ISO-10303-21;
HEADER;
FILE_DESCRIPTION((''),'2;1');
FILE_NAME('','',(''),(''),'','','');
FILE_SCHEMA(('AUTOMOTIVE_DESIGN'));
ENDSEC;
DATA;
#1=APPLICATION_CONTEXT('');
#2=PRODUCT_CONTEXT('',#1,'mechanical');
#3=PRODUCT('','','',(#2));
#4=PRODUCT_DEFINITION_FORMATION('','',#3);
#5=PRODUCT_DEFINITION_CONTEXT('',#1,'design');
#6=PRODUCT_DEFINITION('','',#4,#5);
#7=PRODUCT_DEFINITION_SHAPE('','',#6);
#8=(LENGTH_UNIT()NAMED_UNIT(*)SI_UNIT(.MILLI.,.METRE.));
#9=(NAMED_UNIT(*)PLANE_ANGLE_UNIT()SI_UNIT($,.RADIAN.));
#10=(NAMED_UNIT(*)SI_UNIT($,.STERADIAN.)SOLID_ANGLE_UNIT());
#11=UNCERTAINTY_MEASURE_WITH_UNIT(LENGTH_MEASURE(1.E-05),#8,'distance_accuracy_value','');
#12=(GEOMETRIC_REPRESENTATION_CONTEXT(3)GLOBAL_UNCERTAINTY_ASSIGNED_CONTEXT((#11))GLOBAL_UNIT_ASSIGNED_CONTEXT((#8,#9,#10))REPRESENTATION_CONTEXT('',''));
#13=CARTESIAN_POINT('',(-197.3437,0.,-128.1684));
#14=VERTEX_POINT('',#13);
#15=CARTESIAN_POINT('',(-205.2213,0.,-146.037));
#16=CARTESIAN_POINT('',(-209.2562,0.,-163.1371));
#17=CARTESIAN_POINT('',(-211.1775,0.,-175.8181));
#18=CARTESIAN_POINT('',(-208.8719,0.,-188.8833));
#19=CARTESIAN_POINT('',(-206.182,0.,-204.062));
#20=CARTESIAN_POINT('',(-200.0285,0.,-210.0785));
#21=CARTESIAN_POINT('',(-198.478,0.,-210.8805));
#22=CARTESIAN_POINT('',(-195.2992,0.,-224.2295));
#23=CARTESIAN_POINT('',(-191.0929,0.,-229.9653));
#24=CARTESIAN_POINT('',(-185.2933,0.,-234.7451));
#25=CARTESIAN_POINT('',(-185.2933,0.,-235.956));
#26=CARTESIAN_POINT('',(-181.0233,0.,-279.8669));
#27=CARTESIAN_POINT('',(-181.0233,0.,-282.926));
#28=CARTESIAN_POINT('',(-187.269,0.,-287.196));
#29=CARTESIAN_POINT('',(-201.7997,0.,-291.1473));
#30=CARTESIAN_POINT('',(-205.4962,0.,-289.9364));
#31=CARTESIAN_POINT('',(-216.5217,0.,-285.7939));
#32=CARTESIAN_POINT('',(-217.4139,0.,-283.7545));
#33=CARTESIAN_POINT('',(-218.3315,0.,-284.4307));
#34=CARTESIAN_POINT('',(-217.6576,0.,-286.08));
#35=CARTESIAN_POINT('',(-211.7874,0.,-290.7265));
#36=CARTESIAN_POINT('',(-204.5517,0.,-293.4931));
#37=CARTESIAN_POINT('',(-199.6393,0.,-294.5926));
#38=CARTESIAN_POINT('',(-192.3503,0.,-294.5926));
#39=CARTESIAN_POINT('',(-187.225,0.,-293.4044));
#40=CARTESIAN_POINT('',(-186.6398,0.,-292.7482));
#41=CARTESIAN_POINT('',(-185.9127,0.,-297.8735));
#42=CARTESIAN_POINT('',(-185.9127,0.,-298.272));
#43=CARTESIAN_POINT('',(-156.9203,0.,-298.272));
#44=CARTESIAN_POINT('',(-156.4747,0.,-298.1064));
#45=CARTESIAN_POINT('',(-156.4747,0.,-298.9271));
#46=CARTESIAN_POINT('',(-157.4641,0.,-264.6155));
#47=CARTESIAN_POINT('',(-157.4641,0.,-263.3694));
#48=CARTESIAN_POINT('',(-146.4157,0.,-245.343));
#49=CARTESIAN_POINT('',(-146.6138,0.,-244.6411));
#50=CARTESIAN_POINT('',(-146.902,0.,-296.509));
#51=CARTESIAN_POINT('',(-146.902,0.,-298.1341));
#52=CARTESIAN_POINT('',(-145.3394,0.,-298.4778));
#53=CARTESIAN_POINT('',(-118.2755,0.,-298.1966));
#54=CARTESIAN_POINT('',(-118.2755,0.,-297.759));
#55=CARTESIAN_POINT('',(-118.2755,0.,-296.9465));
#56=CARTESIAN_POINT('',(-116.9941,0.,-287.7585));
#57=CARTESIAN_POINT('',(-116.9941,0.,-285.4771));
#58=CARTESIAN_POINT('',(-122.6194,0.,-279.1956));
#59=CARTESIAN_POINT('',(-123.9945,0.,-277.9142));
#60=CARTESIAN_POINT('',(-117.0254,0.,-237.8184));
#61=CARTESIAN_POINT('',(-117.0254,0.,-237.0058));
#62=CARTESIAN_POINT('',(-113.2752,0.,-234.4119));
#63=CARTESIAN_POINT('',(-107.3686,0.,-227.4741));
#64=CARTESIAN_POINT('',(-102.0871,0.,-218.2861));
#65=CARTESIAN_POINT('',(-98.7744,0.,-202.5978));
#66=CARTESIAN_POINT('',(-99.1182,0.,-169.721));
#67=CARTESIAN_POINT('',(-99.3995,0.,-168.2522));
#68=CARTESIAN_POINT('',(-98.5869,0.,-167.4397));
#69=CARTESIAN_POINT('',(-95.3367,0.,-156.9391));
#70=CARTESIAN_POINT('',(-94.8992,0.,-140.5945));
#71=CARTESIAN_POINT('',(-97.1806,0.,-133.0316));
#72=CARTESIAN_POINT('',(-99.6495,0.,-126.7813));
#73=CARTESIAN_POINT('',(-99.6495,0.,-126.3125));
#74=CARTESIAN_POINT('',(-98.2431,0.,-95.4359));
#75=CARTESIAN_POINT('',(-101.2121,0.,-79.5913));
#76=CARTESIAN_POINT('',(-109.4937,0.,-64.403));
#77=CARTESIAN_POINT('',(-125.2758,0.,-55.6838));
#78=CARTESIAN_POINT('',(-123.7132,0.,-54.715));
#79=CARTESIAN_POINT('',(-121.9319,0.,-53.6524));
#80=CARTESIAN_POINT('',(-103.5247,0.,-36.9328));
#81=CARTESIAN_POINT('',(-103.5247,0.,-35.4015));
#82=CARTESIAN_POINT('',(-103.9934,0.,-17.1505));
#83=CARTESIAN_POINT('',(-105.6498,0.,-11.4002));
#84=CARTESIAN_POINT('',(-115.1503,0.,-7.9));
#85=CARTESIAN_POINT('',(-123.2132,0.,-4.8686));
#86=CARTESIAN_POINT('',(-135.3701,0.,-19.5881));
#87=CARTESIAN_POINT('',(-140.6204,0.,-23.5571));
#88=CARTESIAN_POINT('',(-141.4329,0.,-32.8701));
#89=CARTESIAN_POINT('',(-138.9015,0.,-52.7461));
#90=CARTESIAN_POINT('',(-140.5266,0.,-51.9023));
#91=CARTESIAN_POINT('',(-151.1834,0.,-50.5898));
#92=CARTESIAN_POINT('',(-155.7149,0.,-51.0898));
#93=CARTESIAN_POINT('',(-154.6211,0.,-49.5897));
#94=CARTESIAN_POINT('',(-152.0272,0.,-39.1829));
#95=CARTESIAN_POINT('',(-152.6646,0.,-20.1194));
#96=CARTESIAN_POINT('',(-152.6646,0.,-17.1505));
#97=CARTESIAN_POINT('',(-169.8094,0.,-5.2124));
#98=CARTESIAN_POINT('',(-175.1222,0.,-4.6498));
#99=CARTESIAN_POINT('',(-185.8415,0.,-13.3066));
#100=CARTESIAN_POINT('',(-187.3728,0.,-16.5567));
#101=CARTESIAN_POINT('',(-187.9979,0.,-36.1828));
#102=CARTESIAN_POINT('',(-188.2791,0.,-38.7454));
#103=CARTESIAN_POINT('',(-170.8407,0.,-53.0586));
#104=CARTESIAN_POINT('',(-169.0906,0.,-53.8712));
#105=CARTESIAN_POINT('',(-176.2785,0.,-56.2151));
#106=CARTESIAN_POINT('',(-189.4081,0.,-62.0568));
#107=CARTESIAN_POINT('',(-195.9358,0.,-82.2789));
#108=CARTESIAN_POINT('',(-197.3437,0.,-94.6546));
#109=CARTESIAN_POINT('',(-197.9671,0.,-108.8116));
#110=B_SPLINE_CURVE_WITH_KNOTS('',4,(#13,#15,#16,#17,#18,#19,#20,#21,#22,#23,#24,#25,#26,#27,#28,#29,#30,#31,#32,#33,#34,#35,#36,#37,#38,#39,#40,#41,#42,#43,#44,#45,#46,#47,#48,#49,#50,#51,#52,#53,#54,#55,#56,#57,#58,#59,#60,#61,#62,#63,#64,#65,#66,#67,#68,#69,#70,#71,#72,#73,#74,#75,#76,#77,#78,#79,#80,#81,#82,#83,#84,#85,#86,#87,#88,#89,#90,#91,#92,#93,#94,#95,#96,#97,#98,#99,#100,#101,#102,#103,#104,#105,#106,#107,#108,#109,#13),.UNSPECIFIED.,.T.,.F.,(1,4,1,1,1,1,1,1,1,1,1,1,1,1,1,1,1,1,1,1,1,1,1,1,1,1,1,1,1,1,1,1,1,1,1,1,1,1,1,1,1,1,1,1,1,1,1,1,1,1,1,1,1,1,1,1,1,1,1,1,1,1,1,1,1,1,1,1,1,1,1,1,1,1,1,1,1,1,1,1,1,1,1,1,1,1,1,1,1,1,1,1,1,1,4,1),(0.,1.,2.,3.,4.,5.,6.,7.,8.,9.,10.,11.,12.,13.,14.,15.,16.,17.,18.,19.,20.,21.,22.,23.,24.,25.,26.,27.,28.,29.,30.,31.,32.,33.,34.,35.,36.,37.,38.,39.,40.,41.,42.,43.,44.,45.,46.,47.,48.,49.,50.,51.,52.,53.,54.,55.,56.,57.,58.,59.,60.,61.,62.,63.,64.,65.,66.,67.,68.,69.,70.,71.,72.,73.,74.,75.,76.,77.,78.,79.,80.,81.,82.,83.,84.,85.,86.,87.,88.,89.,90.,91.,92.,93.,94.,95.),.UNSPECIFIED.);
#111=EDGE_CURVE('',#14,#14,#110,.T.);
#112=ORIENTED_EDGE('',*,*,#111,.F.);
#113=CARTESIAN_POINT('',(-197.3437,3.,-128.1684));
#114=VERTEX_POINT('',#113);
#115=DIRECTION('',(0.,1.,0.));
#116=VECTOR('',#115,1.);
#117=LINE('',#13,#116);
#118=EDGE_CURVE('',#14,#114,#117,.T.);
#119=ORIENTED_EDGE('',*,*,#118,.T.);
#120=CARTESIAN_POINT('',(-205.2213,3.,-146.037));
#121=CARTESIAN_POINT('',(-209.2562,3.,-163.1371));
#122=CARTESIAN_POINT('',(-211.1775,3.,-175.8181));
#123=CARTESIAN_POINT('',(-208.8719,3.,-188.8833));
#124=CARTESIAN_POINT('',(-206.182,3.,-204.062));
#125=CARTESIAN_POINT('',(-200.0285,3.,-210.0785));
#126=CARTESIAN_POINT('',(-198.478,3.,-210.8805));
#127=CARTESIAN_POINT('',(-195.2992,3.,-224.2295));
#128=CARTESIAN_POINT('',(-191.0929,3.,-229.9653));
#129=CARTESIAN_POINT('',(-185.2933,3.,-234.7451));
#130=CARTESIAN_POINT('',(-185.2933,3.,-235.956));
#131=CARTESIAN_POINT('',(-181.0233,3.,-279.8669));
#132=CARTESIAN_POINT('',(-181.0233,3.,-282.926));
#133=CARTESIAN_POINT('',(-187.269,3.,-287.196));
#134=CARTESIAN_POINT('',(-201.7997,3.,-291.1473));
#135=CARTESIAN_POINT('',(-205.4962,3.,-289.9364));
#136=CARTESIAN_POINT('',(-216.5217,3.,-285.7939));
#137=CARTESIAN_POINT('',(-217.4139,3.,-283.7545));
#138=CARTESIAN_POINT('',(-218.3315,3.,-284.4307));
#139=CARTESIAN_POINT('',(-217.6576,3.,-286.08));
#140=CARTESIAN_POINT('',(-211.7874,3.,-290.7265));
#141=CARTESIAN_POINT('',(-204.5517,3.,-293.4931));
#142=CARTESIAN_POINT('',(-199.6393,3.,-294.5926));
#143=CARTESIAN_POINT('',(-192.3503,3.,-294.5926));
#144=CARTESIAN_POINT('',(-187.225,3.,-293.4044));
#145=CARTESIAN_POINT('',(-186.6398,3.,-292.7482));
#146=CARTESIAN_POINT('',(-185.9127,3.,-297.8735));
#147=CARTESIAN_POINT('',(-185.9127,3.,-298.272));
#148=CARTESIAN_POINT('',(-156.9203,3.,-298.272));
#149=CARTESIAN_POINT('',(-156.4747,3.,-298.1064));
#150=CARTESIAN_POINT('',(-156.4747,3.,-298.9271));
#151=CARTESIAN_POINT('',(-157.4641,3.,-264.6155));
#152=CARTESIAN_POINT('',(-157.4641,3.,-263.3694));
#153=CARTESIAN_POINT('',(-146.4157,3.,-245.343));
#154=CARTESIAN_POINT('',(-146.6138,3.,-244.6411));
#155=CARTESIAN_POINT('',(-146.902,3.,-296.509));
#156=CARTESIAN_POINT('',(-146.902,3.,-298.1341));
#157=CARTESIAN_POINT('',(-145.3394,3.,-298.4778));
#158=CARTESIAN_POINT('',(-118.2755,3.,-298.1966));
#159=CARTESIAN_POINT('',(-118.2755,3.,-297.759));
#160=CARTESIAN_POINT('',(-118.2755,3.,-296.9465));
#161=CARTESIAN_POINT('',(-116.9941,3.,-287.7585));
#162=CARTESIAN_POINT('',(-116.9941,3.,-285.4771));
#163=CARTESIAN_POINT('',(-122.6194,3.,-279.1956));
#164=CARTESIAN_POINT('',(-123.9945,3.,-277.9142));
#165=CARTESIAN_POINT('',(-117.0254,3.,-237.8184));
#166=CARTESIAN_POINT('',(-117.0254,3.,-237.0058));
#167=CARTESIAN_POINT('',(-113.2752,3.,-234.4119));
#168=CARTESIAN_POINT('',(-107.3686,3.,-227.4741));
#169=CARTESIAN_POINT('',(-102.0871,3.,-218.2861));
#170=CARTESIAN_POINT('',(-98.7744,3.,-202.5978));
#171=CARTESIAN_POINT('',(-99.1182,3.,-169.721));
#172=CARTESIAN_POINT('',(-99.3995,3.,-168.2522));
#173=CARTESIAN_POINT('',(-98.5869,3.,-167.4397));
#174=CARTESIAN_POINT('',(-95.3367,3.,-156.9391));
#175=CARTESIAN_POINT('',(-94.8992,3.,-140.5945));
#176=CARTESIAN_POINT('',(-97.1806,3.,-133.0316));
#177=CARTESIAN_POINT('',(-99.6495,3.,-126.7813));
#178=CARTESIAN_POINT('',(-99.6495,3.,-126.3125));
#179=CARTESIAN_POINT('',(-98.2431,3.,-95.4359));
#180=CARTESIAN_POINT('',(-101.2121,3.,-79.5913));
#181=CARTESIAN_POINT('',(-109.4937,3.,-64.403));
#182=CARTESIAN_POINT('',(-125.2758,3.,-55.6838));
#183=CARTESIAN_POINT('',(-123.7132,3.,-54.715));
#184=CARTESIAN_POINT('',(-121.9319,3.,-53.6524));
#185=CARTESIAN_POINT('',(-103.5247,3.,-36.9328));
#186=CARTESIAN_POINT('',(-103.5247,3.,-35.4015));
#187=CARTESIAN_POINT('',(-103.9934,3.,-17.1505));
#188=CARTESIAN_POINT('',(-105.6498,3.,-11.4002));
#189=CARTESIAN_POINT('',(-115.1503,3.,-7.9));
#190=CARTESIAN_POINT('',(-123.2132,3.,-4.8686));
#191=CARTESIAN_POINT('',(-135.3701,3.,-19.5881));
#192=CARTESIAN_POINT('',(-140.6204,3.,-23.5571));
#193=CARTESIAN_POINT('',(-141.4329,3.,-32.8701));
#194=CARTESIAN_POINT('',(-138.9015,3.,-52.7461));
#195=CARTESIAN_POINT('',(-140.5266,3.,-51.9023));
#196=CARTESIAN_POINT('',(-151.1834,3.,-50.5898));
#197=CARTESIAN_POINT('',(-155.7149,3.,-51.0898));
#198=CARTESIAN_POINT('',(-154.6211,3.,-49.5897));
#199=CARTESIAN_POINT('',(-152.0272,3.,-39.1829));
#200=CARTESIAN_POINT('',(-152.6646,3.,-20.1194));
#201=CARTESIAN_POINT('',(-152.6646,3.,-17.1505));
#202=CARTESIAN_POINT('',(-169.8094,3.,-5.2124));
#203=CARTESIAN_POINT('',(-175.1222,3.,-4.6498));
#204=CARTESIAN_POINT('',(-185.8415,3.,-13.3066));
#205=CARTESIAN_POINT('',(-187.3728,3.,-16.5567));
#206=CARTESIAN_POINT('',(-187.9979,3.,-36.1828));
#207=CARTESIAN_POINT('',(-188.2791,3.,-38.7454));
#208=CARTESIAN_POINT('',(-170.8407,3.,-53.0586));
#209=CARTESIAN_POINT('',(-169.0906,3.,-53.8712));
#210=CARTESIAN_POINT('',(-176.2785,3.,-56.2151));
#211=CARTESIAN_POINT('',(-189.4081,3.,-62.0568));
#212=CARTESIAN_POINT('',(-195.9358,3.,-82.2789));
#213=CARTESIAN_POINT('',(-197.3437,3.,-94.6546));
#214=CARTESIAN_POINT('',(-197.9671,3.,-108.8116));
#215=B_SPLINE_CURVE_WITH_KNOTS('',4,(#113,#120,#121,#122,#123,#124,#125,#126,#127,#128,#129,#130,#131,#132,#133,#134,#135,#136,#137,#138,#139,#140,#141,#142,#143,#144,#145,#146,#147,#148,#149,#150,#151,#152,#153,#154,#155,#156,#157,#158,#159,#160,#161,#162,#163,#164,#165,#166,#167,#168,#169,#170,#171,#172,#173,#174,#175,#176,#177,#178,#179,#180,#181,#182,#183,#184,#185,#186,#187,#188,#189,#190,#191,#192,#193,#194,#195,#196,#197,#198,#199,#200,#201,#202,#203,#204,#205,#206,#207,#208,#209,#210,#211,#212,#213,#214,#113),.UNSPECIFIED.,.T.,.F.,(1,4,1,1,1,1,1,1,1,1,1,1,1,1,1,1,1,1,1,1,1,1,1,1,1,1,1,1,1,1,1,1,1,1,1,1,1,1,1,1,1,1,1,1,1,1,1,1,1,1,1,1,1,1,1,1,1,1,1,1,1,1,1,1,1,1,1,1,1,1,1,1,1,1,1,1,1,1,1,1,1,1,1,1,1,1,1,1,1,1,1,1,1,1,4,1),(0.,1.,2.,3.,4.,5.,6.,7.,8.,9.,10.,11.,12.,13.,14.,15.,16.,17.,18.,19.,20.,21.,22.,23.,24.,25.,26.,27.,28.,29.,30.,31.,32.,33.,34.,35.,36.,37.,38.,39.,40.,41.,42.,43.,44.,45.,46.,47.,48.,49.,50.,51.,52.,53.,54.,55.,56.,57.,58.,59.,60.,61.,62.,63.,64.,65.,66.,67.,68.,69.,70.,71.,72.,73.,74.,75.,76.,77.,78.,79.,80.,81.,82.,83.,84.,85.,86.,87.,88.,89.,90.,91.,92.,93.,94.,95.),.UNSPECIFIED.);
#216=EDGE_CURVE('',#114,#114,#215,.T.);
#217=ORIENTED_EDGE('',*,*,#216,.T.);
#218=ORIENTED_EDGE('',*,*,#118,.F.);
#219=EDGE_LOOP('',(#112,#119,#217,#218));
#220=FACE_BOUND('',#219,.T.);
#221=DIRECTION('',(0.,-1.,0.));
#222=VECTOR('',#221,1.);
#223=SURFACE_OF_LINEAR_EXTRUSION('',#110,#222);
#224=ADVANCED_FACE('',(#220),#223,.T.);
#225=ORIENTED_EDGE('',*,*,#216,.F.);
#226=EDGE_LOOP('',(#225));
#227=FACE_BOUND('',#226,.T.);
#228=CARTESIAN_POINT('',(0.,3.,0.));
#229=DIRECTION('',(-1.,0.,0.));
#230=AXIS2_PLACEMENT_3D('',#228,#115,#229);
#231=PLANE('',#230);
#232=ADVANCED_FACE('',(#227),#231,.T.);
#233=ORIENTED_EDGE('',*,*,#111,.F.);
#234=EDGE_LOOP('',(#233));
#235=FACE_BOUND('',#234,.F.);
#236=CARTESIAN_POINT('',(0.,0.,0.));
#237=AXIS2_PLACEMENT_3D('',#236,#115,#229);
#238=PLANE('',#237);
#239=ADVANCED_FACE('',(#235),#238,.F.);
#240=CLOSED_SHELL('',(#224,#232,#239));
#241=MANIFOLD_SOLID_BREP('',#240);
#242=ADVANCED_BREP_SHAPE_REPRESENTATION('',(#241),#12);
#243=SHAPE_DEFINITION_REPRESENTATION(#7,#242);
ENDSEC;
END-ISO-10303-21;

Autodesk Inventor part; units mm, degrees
ref_plane "YZ Plane" through (0, 0, 0) normal (1, 0, 0) x (0, 1, 0)
ref_plane "XZ Plane" through (0, 0, 0) normal (0, 1, 0) x (-1, 0, 0)
ref_plane "XY Plane" through (0, 0, 0) normal (0, 0, 1) x (1, 0, 0)
sketch "Sketch1" plane through (0, 0, 0) normal (0, 1, 0) x (-1, 0, 0)
  line L0 (0, 0) -> (305.3292, 0) construction
  line L1 (305.3292, 0) -> (305.3292, -305.3292) construction
  line L2 (305.3292, -305.3292) -> (0, -305.3292) construction
  line L3 (0, -305.3292) -> (0, 0) construction
  line L4 (197.3437, -128.1684) -> (205.2213, -146.037) construction
  line L5 (205.2213, -146.037) -> (209.2562, -163.1371) construction
  line L6 (209.2562, -163.1371) -> (211.1775, -175.8181) construction
  line L7 (211.1775, -175.8181) -> (208.8719, -188.8833) construction
  line L8 (208.8719, -188.8833) -> (206.182, -204.062) construction
  line L9 (206.182, -204.062) -> (200.0285, -210.0785) construction
  line L10 (200.0285, -210.0785) -> (198.478, -210.8805) construction
  line L11 (198.478, -210.8805) -> (195.2992, -224.2295) construction
  line L12 (195.2992, -224.2295) -> (191.0929, -229.9653) construction
  line L13 (191.0929, -229.9653) -> (185.2933, -234.7451) construction
  line L14 (185.2933, -234.7451) -> (185.2933, -235.956) construction
  line L15 (185.2933, -235.956) -> (181.0233, -279.8669) construction
  line L16 (181.0233, -279.8669) -> (181.0233, -282.926) construction
  line L17 (181.0233, -282.926) -> (187.269, -287.196) construction
  line L18 (187.269, -287.196) -> (201.7997, -291.1473) construction
  line L19 (201.7997, -291.1473) -> (205.4962, -289.9364) construction
  line L20 (205.4962, -289.9364) -> (216.5217, -285.7939) construction
  line L21 (216.5217, -285.7939) -> (217.4139, -283.7545) construction
  line L22 (217.4139, -283.7545) -> (218.3315, -284.4307) construction
  line L23 (218.3315, -284.4307) -> (217.6576, -286.08) construction
  line L24 (217.6576, -286.08) -> (211.7874, -290.7265) construction
  line L25 (211.7874, -290.7265) -> (204.5517, -293.4931) construction
  line L26 (204.5517, -293.4931) -> (199.6393, -294.5926) construction
  line L27 (199.6393, -294.5926) -> (192.3503, -294.5926) construction
  line L28 (192.3503, -294.5926) -> (187.225, -293.4044) construction
  line L29 (187.225, -293.4044) -> (186.6398, -292.7482) construction
  line L30 (186.6398, -292.7482) -> (185.9127, -297.8735) construction
  line L31 (185.9127, -297.8735) -> (185.9127, -298.272) construction
  line L32 (185.9127, -298.272) -> (156.9203, -298.272) construction
  line L33 (156.9203, -298.272) -> (156.4747, -298.1064) construction
  line L34 (156.4747, -298.1064) -> (156.4747, -298.9271) construction
  line L35 (156.4747, -298.9271) -> (157.4641, -264.6155) construction
  line L36 (157.4641, -264.6155) -> (157.4641, -263.3694) construction
  line L37 (157.4641, -263.3694) -> (146.4157, -245.343) construction
  line L38 (146.4157, -245.343) -> (146.6138, -244.6411) construction
  line L39 (146.6138, -244.6411) -> (146.902, -296.509) construction
  line L40 (146.902, -296.509) -> (146.902, -298.1341) construction
  line L41 (146.902, -298.1341) -> (145.3394, -298.4778) construction
  line L42 (145.3394, -298.4778) -> (118.2755, -298.1966) construction
  line L43 (118.2755, -298.1966) -> (118.2755, -297.759) construction
  line L44 (118.2755, -297.759) -> (118.2755, -296.9465) construction
  line L45 (118.2755, -296.9465) -> (116.9941, -287.7585) construction
  line L46 (116.9941, -287.7585) -> (116.9941, -285.4771) construction
  line L47 (116.9941, -285.4771) -> (122.6194, -279.1956) construction
  line L48 (122.6194, -279.1956) -> (123.9945, -277.9142) construction
  line L49 (123.9945, -277.9142) -> (117.0254, -237.8184) construction
  line L50 (117.0254, -237.8184) -> (117.0254, -237.0058) construction
  line L51 (117.0254, -237.0058) -> (113.2752, -234.4119) construction
  line L52 (113.2752, -234.4119) -> (107.3686, -227.4741) construction
  line L53 (107.3686, -227.4741) -> (102.0871, -218.2861) construction
  line L54 (102.0871, -218.2861) -> (98.7744, -202.5978) construction
  line L55 (98.7744, -202.5978) -> (99.1182, -169.721) construction
  line L56 (99.1182, -169.721) -> (99.3995, -168.2522) construction
  line L57 (99.3995, -168.2522) -> (98.5869, -167.4397) construction
  line L58 (98.5869, -167.4397) -> (95.3367, -156.9391) construction
  line L59 (95.3367, -156.9391) -> (94.8992, -140.5945) construction
  line L60 (94.8992, -140.5945) -> (97.1806, -133.0316) construction
  line L61 (97.1806, -133.0316) -> (99.6495, -126.7813) construction
  line L62 (99.6495, -126.7813) -> (99.6495, -126.3125) construction
  line L63 (99.6495, -126.3125) -> (98.2431, -95.4359) construction
  line L64 (98.2431, -95.4359) -> (101.2121, -79.5913) construction
  line L65 (101.2121, -79.5913) -> (109.4937, -64.403) construction
  line L66 (109.4937, -64.403) -> (125.2758, -55.6838) construction
  line L67 (125.2758, -55.6838) -> (123.7132, -54.715) construction
  line L68 (123.7132, -54.715) -> (121.9319, -53.6524) construction
  line L69 (121.9319, -53.6524) -> (103.5247, -36.9328) construction
  line L70 (103.5247, -36.9328) -> (103.5247, -35.4015) construction
  line L71 (103.5247, -35.4015) -> (103.9934, -17.1505) construction
  line L72 (103.9934, -17.1505) -> (105.6498, -11.4002) construction
  line L73 (105.6498, -11.4002) -> (115.1503, -7.9) construction
  line L74 (115.1503, -7.9) -> (123.2132, -4.8686) construction
  line L75 (123.2132, -4.8686) -> (135.3701, -19.5881) construction
  line L76 (135.3701, -19.5881) -> (140.6204, -23.5571) construction
  line L77 (140.6204, -23.5571) -> (141.4329, -32.8701) construction
  line L78 (141.4329, -32.8701) -> (138.9015, -52.7461) construction
  line L79 (138.9015, -52.7461) -> (140.5266, -51.9023) construction
  line L80 (140.5266, -51.9023) -> (151.1834, -50.5898) construction
  line L81 (151.1834, -50.5898) -> (155.7149, -51.0898) construction
  line L82 (155.7149, -51.0898) -> (154.6211, -49.5897) construction
  line L83 (154.6211, -49.5897) -> (152.0272, -39.1829) construction
  line L84 (152.0272, -39.1829) -> (152.6646, -20.1194) construction
  line L85 (152.6646, -20.1194) -> (152.6646, -17.1505) construction
  line L86 (152.6646, -17.1505) -> (169.8094, -5.2124) construction
  line L87 (169.8094, -5.2124) -> (175.1222, -4.6498) construction
  line L88 (175.1222, -4.6498) -> (185.8415, -13.3066) construction
  line L89 (185.8415, -13.3066) -> (187.3728, -16.5567) construction
  line L90 (187.3728, -16.5567) -> (187.9979, -36.1828) construction
  line L91 (187.9979, -36.1828) -> (188.2791, -38.7454) construction
  line L92 (188.2791, -38.7454) -> (170.8407, -53.0586) construction
  line L93 (170.8407, -53.0586) -> (169.0906, -53.8712) construction
  line L94 (169.0906, -53.8712) -> (176.2785, -56.2151) construction
  line L95 (176.2785, -56.2151) -> (189.4081, -62.0568) construction
  line L96 (189.4081, -62.0568) -> (195.9358, -82.2789) construction
  line L97 (195.9358, -82.2789) -> (197.3437, -94.6546) construction
  line L98 (197.3437, -94.6546) -> (197.9671, -108.8116) construction
  line L99 (197.9671, -108.8116) -> (197.3437, -128.1684) construction
  spline S0 degree 4 poles (197.3437, -128.1684) (205.2213, -146.037) (209.2562, -163.1371) (211.1775, -175.8181) (208.8719, -188.8833) (206.182, -204.062) (200.0285, -210.0785) (198.478, -210.8805) (195.2992, -224.2295) (191.0929, -229.9653) (185.2933, -234.7451) (185.2933, -235.956) (181.0233, -279.8669) (181.0233, -282.926) (187.269, -287.196) (201.7997, -291.1473) (205.4962, -289.9364) (216.5217, -285.7939) (217.4139, -283.7545) (218.3315, -284.4307) (217.6576, -286.08) (211.7874, -290.7265) (204.5517, -293.4931) (199.6393, -294.5926) (192.3503, -294.5926) (187.225, -293.4044) (186.6398, -292.7482) (185.9127, -297.8735) (185.9127, -298.272) (156.9203, -298.272) (156.4747, -298.1064) (156.4747, -298.9271) (157.4641, -264.6155) (157.4641, -263.3694) (146.4157, -245.343) (146.6138, -244.6411) (146.902, -296.509) (146.902, -298.1341) (145.3394, -298.4778) (118.2755, -298.1966) (118.2755, -297.759) (118.2755, -296.9465) (116.9941, -287.7585) (116.9941, -285.4771) (122.6194, -279.1956) (123.9945, -277.9142) (117.0254, -237.8184) (117.0254, -237.0058) (113.2752, -234.4119) (107.3686, -227.4741) (102.0871, -218.2861) (98.7744, -202.5978) (99.1182, -169.721) (99.3995, -168.2522) (98.5869, -167.4397) (95.3367, -156.9391) (94.8992, -140.5945) (97.1806, -133.0316) (99.6495, -126.7813) (99.6495, -126.3125) (98.2431, -95.4359) (101.2121, -79.5913) (109.4937, -64.403) (125.2758, -55.6838) (123.7132, -54.715) (121.9319, -53.6524) (103.5247, -36.9328) (103.5247, -35.4015) (103.9934, -17.1505) (105.6498, -11.4002) (115.1503, -7.9) (123.2132, -4.8686) (135.3701, -19.5881) (140.6204, -23.5571) (141.4329, -32.8701) (138.9015, -52.7461) (140.5266, -51.9023) (151.1834, -50.5898) (155.7149, -51.0898) (154.6211, -49.5897) (152.0272, -39.1829) (152.6646, -20.1194) (152.6646, -17.1505) (169.8094, -5.2124) (175.1222, -4.6498) (185.8415, -13.3066) (187.3728, -16.5567) (187.9979, -36.1828) (188.2791, -38.7454) (170.8407, -53.0586) (169.0906, -53.8712) (176.2785, -56.2151) (189.4081, -62.0568) (195.9358, -82.2789) (197.3437, -94.6546) (197.9671, -108.8116) (197.3437, -128.1684) knots 1 1 1 1 1 2 3 4 5 6 7 8 9 10 11 12 13 14 15 16 17 18 19 20 21 22 23 24 25 26 27 28 29 30 31 32 33 34 35 36 37 38 39 40 41 42 43 44 45 46 47 48 49 50 51 52 53 54 55 56 57 58 59 60 61 62 63 64 65 66 67 68 69 70 71 72 73 74 75 76 77 78 79 80 81 82 83 84 85 86 87 88 89 90 91 92 93 94 94 94 94 94
extrude "Extrusion1" add sketch "Sketch1" along normal blind 3
properties part number "00Mousetop"
